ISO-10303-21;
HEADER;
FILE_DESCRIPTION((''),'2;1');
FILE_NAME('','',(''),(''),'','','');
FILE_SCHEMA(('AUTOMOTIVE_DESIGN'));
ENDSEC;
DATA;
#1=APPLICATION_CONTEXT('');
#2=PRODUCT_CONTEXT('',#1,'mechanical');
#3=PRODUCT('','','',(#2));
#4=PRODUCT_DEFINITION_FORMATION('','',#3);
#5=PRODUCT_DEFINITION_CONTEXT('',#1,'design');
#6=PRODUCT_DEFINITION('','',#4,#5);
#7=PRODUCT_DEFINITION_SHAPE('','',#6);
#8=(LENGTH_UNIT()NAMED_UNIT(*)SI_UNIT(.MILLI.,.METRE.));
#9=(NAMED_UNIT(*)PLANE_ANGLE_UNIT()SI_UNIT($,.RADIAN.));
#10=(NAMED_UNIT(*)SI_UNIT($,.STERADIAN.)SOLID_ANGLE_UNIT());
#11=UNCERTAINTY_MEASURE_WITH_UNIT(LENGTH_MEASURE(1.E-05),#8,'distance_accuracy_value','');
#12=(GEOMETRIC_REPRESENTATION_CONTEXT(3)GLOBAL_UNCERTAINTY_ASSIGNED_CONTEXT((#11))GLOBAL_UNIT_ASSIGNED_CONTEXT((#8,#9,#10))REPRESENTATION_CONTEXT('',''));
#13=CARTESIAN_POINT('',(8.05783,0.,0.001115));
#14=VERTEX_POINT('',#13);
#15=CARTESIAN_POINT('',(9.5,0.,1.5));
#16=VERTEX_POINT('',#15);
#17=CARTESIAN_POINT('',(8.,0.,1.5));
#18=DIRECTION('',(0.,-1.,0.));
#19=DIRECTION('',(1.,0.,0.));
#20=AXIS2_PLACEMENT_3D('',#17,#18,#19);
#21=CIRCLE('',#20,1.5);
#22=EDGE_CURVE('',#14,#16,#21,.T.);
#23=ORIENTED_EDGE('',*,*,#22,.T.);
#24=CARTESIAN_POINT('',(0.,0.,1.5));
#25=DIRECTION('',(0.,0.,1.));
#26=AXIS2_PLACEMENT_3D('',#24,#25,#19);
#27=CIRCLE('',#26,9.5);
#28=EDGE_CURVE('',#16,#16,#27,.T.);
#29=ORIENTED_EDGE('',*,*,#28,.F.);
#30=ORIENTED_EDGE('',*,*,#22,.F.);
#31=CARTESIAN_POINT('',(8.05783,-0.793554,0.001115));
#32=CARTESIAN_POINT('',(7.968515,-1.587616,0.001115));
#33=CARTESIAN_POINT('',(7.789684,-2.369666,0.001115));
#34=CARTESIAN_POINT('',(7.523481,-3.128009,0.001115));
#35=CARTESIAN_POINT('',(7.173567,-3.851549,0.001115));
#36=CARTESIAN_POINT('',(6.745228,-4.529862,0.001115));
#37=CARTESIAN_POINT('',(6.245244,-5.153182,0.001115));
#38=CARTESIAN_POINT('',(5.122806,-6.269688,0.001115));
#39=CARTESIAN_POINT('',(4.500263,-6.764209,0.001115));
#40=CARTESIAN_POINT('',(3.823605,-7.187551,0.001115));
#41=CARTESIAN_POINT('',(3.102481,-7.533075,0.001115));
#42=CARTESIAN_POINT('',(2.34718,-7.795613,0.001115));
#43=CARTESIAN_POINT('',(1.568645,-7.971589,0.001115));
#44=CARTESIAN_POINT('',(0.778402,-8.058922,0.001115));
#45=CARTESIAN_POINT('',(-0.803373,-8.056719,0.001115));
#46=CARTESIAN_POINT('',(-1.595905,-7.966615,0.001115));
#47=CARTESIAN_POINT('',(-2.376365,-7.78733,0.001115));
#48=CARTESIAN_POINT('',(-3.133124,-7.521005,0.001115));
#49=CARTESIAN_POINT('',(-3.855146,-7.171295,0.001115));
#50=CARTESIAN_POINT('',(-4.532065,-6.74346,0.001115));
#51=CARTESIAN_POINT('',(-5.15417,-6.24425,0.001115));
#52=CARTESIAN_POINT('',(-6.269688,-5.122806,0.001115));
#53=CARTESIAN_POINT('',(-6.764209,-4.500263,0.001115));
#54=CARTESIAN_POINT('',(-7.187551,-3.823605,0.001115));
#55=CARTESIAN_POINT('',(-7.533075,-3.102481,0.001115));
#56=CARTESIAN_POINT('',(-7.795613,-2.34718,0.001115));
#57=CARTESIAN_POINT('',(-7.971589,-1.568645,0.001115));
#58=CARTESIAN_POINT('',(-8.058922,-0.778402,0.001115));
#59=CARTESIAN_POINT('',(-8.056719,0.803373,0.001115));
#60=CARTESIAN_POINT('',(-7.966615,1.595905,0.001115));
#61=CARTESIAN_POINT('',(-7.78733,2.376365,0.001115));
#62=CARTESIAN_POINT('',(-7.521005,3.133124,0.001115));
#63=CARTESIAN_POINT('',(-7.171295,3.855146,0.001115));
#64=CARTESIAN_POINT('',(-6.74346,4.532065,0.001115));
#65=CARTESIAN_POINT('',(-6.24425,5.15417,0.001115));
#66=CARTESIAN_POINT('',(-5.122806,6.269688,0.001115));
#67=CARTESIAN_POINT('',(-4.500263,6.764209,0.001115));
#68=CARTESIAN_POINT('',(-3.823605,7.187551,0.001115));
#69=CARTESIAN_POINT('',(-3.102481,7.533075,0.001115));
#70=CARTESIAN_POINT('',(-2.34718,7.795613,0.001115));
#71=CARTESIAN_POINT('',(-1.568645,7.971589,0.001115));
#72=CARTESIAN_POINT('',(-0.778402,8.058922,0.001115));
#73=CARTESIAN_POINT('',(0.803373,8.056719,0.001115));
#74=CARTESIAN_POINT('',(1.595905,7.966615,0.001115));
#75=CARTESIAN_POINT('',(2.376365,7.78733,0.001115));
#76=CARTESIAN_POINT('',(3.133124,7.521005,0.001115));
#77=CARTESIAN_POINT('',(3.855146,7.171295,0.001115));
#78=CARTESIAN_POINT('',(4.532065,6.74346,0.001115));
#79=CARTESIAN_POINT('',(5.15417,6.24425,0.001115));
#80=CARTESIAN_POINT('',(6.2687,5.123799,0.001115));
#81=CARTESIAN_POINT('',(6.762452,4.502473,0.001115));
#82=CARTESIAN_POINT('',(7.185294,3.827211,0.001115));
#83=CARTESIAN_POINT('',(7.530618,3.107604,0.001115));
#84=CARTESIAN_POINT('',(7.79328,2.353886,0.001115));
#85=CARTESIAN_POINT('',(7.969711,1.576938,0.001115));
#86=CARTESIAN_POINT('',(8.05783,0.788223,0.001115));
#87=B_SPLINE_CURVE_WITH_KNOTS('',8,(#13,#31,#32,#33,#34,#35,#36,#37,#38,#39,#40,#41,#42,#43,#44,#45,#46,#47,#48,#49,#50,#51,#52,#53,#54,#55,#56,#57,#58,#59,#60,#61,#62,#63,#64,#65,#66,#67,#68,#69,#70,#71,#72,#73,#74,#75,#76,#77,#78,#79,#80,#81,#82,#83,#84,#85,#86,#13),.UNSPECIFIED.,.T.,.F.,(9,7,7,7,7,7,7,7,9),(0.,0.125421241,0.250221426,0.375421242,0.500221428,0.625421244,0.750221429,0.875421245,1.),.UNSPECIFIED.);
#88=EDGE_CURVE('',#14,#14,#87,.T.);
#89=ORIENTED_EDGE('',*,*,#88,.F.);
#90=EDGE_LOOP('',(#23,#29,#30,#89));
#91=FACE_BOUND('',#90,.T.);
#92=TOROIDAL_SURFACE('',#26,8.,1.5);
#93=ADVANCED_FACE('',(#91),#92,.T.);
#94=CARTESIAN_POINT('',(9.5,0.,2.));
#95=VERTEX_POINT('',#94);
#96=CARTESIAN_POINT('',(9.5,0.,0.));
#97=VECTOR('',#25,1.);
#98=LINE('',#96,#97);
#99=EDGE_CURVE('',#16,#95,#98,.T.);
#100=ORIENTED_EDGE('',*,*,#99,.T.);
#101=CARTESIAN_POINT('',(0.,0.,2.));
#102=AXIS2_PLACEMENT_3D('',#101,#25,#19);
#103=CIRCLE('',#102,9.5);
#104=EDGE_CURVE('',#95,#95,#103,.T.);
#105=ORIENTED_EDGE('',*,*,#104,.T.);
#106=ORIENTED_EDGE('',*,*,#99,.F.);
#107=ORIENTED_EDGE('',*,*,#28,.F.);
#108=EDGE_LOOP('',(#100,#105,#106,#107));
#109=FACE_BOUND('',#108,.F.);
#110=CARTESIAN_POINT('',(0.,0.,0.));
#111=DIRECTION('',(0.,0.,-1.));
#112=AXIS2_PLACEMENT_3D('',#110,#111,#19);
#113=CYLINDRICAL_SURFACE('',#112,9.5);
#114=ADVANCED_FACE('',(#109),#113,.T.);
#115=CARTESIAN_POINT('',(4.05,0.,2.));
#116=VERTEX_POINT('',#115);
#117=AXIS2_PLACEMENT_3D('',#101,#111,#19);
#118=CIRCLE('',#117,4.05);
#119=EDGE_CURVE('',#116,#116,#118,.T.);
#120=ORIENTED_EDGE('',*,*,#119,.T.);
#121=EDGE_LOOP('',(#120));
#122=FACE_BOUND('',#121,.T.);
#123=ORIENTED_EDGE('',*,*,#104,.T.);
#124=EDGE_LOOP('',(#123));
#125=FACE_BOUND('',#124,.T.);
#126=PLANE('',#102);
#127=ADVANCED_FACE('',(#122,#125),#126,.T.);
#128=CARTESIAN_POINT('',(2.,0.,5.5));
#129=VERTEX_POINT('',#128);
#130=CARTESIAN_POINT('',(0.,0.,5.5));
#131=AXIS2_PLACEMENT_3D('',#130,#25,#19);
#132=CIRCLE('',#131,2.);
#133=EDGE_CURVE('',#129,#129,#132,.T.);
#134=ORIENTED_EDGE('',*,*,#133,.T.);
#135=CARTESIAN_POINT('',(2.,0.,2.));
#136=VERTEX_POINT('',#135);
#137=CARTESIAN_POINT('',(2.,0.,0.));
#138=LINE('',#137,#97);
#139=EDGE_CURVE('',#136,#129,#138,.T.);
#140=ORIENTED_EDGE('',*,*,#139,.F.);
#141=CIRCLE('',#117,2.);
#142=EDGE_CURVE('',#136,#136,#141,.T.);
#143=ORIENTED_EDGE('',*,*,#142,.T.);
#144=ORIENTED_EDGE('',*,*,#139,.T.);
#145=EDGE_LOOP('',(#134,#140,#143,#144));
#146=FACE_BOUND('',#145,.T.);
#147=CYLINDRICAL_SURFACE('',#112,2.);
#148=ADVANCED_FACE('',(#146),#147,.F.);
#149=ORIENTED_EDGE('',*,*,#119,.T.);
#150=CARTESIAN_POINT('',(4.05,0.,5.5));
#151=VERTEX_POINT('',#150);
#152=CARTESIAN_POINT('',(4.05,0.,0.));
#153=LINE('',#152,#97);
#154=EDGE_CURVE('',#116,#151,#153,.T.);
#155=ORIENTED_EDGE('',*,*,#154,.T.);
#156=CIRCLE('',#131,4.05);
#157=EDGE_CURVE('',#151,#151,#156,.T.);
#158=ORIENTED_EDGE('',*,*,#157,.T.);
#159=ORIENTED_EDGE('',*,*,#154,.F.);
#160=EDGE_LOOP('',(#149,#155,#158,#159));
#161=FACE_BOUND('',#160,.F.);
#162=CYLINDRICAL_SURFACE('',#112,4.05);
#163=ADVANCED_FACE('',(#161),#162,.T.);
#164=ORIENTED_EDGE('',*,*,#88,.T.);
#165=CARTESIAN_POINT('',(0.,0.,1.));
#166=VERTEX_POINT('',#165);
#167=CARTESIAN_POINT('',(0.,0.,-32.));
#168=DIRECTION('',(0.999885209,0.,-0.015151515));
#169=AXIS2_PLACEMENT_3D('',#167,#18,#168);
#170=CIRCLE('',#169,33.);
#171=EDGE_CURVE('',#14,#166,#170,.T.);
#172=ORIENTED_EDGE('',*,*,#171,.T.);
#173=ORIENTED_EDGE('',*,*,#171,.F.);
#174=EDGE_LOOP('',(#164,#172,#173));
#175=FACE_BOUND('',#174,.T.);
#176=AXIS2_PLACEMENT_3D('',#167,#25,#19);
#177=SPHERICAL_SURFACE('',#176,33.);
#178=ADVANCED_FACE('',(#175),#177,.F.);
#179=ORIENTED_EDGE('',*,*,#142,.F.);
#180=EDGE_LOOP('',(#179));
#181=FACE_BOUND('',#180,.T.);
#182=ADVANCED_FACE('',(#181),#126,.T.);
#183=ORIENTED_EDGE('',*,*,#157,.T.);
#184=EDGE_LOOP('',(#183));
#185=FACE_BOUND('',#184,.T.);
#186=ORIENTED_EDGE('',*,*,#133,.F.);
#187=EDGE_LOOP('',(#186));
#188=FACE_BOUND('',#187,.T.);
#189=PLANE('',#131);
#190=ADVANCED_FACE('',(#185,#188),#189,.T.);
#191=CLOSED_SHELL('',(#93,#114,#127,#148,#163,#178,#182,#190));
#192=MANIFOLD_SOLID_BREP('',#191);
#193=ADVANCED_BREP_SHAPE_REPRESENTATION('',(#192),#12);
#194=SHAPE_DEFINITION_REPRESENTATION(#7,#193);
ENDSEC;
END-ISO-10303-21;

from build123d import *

# Parameters (mm, degrees)
F0_R     = 9.5
F0_R_2   = 4.05
F0_R_3   = 2
F1_DEPTH = 2
F2_R     = 4.05
F2_R_2   = 2
F3_DEPTH = 5.5
F4_R     = 1.5


# Not quite as in the source:
# - a feature names something its author has since deleted; it is built from what else it names


with BuildPart() as f1:
    # F0 (on Top) → F1 (new body)
    with BuildSketch(Plane.XY):
        Circle(F0_R)
        Circle(F0_R_2, mode=Mode.SUBTRACT)
        Circle(F0_R_2)
        Circle(F0_R_3, mode=Mode.SUBTRACT)
        Circle(F0_R_3)
    extrude(amount=F1_DEPTH)

    # F2 (on Top) → F3 (join)
    with BuildSketch(Plane.XY):
        Circle(F2_R)
        Circle(F2_R_2, mode=Mode.SUBTRACT)
    extrude(amount=F3_DEPTH)

    # F4
    f4_edges = [f1.edges().sort_by_distance(p)[0] for p in [
        (-9.5, 0, 0),
    ]]
    fillet(f4_edges, radius=F4_R)

    # F5 (on Front) → F6 (revolve, cut)
    with BuildSketch(Plane.XZ):
        with BuildLine():
            ThreePointArc((0, 0), (23.1570723538, -9.489364109), (32.9962119038, -32.5))
            ThreePointArc((32.9962119038, -32.5), (23.510635891, -8.8429276462), (0, 1))
            Line((0, 1), (0, 0))
        make_face()
    revolve(axis=Axis((0, 0, -31.5146126637), (0, 0, -1)), mode=Mode.SUBTRACT)


solid = f1.part
